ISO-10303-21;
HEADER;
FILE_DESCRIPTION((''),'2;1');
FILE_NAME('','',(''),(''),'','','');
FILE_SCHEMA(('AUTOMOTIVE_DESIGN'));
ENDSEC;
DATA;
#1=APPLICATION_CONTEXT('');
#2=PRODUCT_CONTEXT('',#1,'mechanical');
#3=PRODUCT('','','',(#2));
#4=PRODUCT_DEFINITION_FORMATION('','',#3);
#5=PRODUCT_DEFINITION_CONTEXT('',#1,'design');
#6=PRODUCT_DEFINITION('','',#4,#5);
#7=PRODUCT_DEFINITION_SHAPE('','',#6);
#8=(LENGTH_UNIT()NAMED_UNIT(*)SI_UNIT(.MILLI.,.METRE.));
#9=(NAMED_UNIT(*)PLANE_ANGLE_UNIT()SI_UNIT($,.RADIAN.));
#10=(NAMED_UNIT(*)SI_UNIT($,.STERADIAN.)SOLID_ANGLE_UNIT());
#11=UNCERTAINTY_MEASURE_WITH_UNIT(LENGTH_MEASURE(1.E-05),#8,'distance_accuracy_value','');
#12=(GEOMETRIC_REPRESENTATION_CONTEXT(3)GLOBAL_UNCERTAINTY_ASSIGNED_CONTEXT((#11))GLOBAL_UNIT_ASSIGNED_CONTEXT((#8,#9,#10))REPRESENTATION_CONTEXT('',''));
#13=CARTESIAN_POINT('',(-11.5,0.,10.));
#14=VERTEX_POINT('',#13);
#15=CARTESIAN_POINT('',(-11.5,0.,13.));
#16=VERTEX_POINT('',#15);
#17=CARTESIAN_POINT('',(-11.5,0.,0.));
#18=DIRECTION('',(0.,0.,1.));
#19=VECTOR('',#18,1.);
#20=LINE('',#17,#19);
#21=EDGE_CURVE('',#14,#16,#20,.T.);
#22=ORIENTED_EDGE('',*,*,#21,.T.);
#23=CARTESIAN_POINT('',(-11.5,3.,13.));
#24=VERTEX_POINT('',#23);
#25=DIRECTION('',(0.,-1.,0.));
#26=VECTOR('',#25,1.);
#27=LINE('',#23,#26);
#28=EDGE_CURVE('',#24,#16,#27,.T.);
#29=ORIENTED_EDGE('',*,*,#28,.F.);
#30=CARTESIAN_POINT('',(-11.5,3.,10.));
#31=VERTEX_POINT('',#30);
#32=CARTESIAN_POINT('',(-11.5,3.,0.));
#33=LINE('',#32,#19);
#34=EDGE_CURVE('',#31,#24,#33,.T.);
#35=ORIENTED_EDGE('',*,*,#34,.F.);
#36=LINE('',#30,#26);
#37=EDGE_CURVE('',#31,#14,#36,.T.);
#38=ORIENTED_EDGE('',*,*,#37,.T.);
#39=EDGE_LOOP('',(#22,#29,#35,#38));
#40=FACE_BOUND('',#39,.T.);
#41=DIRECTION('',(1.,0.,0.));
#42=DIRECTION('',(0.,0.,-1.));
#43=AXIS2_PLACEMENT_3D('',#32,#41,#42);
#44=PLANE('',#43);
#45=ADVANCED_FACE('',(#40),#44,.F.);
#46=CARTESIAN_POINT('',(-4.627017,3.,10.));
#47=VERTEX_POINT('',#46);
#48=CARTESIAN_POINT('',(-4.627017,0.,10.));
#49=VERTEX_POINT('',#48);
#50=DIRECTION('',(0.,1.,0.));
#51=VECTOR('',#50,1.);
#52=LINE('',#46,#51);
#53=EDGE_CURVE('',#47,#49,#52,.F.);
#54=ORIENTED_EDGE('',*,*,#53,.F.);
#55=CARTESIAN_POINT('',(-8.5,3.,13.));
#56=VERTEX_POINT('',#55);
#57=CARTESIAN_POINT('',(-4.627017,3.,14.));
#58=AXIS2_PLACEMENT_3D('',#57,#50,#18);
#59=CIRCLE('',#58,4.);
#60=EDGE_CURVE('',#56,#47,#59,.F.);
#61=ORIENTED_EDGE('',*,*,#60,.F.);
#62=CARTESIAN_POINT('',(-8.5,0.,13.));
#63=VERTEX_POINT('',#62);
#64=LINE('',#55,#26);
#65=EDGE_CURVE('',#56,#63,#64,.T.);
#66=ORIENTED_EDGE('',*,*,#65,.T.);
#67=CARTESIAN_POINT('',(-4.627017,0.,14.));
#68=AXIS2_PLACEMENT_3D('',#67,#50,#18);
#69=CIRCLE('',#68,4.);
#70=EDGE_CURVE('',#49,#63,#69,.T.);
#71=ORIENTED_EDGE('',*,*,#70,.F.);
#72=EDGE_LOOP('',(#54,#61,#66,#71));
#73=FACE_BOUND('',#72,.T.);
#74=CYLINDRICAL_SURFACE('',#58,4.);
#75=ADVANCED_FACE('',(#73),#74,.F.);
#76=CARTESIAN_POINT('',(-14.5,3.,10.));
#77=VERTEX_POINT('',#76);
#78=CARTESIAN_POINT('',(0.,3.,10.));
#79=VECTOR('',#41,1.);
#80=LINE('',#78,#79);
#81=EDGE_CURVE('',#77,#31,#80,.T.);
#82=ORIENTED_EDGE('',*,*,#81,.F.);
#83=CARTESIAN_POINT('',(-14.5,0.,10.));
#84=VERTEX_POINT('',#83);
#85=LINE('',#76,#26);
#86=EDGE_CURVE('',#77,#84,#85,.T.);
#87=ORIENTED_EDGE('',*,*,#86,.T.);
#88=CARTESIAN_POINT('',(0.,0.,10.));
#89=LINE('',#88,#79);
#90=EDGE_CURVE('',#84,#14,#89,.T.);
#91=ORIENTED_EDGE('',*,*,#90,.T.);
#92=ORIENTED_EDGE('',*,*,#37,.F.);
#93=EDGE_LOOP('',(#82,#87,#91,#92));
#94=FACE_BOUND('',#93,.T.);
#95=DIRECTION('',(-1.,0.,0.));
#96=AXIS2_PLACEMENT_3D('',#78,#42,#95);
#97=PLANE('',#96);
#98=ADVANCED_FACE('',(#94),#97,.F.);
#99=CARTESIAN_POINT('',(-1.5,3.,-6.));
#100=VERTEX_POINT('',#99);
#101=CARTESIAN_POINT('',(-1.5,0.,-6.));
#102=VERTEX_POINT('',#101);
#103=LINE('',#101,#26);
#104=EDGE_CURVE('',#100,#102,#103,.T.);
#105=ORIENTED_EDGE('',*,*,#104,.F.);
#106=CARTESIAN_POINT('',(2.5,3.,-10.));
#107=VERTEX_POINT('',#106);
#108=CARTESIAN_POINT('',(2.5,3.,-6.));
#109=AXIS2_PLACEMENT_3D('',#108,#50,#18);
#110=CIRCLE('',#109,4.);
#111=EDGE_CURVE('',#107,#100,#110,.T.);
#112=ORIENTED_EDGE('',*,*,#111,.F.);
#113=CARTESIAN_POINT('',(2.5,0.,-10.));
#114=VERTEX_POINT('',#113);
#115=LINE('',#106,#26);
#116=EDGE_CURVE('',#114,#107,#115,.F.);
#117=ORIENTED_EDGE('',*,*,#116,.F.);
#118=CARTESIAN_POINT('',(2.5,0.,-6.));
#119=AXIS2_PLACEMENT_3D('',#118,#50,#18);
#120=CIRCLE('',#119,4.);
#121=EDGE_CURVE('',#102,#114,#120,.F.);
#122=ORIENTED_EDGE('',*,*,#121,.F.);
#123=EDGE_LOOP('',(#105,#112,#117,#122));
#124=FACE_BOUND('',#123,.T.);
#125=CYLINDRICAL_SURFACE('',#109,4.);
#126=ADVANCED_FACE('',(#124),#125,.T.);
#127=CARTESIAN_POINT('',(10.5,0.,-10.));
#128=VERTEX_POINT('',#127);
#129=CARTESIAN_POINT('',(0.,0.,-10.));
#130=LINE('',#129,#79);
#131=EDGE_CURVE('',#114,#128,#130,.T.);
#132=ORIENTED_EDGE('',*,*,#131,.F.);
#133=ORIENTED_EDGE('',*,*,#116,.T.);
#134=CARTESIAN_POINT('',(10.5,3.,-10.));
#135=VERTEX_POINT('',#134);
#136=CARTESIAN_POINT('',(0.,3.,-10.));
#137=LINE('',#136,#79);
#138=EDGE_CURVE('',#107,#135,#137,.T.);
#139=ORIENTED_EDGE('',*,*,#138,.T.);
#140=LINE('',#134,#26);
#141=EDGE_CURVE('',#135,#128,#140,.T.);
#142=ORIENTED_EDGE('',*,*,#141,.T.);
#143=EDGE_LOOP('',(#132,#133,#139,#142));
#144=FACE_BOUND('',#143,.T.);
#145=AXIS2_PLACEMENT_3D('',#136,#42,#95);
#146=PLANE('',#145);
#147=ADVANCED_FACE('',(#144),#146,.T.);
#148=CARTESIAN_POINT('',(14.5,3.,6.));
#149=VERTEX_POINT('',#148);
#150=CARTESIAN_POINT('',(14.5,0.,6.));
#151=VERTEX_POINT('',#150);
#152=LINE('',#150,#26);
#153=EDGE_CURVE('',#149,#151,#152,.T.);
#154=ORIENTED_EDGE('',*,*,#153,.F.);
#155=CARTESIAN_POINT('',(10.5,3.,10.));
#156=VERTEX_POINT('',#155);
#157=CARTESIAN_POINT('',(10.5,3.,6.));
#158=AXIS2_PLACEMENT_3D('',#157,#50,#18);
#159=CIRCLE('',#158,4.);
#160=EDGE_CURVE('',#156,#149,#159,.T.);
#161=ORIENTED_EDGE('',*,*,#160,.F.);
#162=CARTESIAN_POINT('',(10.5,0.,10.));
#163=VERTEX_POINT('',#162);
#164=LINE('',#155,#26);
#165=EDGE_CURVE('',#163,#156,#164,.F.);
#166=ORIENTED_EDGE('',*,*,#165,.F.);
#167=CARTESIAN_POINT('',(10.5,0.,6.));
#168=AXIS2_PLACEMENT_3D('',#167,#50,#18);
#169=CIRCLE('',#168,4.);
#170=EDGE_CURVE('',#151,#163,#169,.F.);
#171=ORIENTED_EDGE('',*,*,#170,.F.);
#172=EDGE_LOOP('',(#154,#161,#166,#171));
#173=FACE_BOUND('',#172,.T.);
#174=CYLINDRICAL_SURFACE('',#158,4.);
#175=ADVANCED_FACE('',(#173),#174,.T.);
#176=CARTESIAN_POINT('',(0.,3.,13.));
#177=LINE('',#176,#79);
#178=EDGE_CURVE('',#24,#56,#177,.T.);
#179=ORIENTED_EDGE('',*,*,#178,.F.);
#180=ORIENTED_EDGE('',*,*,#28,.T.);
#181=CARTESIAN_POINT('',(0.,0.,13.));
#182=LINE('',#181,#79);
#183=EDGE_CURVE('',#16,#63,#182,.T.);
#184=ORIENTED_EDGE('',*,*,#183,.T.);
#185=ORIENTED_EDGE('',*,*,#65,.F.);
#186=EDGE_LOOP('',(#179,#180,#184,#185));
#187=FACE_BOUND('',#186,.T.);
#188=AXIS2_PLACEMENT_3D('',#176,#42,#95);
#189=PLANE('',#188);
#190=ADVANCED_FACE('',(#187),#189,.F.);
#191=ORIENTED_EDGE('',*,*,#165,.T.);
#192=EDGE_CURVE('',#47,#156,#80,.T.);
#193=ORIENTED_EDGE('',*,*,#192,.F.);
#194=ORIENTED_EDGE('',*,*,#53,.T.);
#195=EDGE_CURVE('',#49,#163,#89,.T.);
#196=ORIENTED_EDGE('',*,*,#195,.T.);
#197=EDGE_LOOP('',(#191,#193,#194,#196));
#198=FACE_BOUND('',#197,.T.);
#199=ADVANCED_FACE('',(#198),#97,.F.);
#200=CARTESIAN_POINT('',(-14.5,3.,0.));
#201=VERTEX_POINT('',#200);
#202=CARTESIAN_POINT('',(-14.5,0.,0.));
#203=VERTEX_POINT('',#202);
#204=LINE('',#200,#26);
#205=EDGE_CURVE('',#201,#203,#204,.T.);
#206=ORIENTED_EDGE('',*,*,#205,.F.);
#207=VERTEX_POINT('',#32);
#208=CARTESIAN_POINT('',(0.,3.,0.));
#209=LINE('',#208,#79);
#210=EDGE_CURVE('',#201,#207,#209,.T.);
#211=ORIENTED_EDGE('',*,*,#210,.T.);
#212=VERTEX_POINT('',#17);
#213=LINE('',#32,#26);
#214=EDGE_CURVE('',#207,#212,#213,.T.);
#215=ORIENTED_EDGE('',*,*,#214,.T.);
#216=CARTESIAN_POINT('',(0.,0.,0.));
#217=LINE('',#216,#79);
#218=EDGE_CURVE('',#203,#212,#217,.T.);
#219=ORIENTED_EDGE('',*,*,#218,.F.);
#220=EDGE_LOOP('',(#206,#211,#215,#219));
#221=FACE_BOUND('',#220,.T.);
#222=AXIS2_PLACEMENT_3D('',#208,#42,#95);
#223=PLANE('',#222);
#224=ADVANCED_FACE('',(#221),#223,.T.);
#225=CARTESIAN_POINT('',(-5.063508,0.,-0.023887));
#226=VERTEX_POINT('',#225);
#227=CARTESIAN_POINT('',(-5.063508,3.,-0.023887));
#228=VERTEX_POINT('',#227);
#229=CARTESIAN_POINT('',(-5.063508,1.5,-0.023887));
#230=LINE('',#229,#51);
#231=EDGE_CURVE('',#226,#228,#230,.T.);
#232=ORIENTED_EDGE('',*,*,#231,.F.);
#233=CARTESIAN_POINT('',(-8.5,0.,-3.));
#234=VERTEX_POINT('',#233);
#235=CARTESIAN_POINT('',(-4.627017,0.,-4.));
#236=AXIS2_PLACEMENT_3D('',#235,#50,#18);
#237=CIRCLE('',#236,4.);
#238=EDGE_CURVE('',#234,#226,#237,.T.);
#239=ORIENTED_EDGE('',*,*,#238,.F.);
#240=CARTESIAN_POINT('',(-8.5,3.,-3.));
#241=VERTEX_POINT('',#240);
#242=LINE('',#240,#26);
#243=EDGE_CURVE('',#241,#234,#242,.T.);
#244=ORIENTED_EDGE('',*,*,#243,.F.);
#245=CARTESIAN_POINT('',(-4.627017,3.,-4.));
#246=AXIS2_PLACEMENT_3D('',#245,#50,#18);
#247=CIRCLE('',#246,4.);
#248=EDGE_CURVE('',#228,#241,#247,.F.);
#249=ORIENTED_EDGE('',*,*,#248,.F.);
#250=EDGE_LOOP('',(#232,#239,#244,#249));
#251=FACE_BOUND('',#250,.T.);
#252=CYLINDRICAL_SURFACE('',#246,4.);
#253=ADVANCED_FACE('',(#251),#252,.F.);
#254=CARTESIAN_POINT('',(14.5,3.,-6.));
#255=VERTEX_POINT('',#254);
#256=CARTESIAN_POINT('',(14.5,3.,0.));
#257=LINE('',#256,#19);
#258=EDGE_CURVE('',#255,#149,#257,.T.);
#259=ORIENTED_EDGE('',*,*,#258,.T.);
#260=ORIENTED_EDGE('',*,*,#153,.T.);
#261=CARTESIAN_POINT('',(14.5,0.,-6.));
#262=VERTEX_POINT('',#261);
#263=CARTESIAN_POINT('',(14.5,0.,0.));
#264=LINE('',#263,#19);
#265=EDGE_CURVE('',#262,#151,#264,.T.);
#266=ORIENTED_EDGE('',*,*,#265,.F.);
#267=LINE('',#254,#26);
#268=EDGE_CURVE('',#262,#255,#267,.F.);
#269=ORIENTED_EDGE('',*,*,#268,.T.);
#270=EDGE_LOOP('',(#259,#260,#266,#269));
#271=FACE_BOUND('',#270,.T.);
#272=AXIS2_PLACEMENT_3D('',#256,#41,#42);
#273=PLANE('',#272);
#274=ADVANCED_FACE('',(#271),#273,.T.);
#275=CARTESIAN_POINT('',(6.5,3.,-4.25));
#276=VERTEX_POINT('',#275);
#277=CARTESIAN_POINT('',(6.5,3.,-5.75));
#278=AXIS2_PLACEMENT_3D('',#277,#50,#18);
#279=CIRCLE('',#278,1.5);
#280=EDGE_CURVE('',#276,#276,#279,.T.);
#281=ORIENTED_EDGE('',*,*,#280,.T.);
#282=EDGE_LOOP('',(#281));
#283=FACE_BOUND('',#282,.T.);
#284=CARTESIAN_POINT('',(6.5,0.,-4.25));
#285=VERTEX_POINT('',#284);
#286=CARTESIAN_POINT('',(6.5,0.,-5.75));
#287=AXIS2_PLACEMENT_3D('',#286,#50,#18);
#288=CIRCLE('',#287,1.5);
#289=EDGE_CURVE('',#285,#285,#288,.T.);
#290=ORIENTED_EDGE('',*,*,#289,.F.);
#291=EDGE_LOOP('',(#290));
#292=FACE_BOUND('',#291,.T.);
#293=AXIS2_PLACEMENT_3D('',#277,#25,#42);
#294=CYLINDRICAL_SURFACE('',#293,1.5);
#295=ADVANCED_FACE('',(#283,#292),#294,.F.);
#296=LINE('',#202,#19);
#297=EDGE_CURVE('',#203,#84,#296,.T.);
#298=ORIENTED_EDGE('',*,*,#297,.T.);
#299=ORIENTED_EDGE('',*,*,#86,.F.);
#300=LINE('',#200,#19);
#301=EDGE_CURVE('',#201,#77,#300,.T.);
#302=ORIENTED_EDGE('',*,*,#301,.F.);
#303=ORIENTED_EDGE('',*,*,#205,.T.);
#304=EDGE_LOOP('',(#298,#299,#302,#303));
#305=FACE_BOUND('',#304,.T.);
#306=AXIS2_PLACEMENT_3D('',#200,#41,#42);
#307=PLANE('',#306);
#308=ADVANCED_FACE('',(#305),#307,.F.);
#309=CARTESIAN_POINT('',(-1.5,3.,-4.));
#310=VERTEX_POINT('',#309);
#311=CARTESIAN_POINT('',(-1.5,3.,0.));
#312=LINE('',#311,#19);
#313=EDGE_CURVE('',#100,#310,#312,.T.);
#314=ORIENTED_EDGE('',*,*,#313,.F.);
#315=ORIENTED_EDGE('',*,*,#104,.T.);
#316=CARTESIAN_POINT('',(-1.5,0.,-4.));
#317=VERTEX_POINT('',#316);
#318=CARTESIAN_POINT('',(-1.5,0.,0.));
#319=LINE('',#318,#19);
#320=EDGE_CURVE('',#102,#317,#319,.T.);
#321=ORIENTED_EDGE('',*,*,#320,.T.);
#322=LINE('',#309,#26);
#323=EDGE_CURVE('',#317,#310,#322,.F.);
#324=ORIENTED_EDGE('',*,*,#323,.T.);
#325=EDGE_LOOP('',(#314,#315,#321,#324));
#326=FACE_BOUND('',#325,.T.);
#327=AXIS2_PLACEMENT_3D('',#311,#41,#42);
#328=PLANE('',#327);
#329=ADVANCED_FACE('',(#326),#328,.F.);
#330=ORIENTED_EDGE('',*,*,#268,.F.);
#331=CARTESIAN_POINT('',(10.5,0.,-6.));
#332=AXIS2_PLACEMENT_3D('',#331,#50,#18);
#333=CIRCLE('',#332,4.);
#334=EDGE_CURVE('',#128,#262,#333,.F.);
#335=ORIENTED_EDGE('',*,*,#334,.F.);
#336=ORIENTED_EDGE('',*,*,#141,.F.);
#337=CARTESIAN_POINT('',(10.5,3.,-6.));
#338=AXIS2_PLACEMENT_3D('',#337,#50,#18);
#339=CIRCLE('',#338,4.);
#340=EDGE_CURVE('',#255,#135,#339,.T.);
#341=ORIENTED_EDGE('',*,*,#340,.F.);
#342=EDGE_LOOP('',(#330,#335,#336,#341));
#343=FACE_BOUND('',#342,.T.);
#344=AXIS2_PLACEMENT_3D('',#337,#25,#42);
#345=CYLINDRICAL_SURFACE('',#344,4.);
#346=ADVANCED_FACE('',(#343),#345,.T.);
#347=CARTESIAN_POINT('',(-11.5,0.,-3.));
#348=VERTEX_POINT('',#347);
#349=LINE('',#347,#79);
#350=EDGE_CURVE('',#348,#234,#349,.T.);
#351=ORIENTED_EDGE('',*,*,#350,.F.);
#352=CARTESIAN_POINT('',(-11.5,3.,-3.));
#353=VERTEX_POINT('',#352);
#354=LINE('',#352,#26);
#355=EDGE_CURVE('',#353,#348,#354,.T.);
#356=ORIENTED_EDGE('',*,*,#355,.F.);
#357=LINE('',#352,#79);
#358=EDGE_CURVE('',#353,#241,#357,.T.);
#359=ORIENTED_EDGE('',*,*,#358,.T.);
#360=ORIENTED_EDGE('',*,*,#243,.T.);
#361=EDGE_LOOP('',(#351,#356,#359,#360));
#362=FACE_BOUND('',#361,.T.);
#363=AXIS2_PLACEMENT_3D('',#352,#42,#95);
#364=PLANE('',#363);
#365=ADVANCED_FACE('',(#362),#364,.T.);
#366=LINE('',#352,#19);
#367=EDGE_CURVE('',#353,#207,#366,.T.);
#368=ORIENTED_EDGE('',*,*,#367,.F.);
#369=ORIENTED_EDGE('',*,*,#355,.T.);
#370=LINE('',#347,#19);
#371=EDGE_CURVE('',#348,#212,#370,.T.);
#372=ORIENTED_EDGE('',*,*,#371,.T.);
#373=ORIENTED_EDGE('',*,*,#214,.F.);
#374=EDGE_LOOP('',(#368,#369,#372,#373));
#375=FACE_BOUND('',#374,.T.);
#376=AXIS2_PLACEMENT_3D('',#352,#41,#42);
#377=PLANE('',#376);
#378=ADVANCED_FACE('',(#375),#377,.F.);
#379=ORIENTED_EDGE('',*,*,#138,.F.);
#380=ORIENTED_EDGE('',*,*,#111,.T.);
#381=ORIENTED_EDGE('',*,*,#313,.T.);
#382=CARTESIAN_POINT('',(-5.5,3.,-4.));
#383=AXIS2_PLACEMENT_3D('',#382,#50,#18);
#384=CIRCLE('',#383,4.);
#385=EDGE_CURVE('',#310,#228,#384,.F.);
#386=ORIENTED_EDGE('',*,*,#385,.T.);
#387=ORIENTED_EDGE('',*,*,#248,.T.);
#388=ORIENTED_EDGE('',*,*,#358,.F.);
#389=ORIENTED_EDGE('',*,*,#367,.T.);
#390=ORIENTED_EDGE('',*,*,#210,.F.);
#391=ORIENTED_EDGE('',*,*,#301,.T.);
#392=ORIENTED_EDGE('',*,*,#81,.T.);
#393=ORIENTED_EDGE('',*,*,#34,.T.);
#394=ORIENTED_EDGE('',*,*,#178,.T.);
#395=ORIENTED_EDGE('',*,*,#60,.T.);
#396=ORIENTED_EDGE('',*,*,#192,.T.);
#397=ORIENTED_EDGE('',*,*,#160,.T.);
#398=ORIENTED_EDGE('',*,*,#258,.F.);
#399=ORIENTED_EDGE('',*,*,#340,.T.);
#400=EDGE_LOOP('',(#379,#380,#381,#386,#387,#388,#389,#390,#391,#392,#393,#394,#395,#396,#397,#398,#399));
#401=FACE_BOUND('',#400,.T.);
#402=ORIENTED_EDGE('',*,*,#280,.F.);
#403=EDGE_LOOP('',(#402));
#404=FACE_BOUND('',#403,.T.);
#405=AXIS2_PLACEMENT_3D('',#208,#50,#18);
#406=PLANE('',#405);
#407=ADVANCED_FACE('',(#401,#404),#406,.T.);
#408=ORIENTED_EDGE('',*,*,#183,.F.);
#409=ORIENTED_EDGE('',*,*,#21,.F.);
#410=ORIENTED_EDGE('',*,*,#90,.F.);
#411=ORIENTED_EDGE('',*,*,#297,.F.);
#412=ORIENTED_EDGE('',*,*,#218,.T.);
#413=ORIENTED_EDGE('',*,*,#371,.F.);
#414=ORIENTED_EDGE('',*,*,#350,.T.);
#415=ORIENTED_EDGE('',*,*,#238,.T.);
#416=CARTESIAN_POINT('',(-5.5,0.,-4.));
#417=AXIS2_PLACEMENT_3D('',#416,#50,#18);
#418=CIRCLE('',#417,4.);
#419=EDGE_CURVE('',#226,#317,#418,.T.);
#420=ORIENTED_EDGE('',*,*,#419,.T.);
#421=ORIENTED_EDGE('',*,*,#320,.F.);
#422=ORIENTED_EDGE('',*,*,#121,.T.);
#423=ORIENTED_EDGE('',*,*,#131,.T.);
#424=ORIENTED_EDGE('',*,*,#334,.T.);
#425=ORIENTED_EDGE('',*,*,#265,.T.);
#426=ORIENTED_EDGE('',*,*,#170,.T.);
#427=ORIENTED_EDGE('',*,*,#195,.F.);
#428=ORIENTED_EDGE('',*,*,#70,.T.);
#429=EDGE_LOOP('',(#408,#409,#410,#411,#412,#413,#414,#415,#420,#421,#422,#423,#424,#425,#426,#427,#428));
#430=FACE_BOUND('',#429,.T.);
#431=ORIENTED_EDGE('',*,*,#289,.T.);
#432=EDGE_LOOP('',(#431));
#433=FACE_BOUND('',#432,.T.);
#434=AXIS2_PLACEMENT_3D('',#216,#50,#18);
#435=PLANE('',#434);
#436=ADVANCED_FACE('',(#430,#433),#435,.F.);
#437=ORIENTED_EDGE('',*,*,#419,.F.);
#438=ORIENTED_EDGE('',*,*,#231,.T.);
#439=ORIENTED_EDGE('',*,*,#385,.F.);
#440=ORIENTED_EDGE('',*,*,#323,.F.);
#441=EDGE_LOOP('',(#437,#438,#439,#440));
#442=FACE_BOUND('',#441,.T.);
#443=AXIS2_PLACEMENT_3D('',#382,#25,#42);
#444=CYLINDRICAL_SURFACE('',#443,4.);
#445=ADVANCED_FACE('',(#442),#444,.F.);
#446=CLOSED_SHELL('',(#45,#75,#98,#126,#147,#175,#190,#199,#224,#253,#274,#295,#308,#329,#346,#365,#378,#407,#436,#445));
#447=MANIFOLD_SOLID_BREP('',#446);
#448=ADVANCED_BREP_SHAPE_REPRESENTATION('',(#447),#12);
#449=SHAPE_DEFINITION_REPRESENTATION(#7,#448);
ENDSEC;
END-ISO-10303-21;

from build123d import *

# Parameters (mm, degrees)
SKETCH1_R           = 1.5
SKETCH1_W           = 3
SKETCH1_H           = 3
BOSS_EXTRUDE1_DEPTH = 3
FILLET1_R           = 4


with BuildPart() as part:
    # Sketch1 → Boss-Extrude1 (new body)
    # profile 1 of 3: a face of its own
    with BuildSketch(Plane(origin=(0, 0, 0), x_dir=(1, 0, 0), z_dir=(0, 1, 0))):
        Polygon((14.5, 10), (-1.5, 10), (-1.5, 0), (-8.5, 0), (-11.5, 0), (-14.5, 0), (-14.5, -10), (-11.5, -10), (-8.5, -10), (14.5, -10), align=None)
        with Locations(Location((6.5, 5.75, 0), (0, 0, 270))):
            Circle(SKETCH1_R, mode=Mode.SUBTRACT)
    # profile 2 of 3: a face of its own
    with BuildSketch(Plane(origin=(0, 0, 0), x_dir=(1, 0, 0), z_dir=(0, 1, 0))):
        with Locations((-10, -11.5)):
            Rectangle(SKETCH1_W, SKETCH1_H)
    # profile 3 of 3: a face of its own
    with BuildSketch(Plane(origin=(0, 0, 0), x_dir=(1, 0, 0), z_dir=(0, 1, 0))):
        with Locations((-10, 1.5)):
            Rectangle(SKETCH1_W, SKETCH1_H)
    extrude(amount=BOSS_EXTRUDE1_DEPTH)

    # Fillet1
    # the kernel refuses this fillet: 4 mm, written as the material it adds along each edge
    with BuildSketch(Plane(origin=(-8.5, 0, 0), x_dir=(1, 0, 0), z_dir=(0, 1, 0))) as fillet1_piece_1:
        with BuildLine():
            CenterArc((3.872983346, 4), FILLET1_R, 194.477512186, 75.522487814)
            Line((0, 3), (0, 0))
            Line((0, 0), (3.872983346, 0))
        make_face()
    extrude(amount=3)
    with BuildSketch(Plane(origin=(-8.5, 0, 10), x_dir=(1, 0, 0), z_dir=(0, 1, 0))) as fillet1_piece_2:
        with BuildLine():
            CenterArc((3.872983346, -4), FILLET1_R, 90, 75.522487814)
            Line((0, -3), (0, 0))
            Line((0, 0), (3.872983346, 0))
        make_face()
    extrude(amount=3)
    with BuildSketch(Plane(origin=(-1.5, 0, 0), x_dir=(0, 0, -1), z_dir=(0, 1, 0))) as fillet1_piece_3:
        with BuildLine():
            CenterArc((FILLET1_R, FILLET1_R), FILLET1_R, 180, 90)
            Line((0, FILLET1_R), (0, 0))
            Line((0, 0), (FILLET1_R, 0))
        make_face()
    extrude(amount=3)
    # the kernel refuses this fillet: 4 mm, written as the material it takes off along each edge
    with BuildSketch(Plane(origin=(14.5, -10, 10), x_dir=(0, 0, -1), z_dir=(0, 1, 0)), Plane(origin=(14.5, -10, -10), x_dir=(-1, 0, 0), z_dir=(0, 1, 0))) as fillet1_2_piece_1:
        with BuildLine():
            CenterArc((FILLET1_R, FILLET1_R), FILLET1_R, 180, 90)
            Line((0, FILLET1_R), (0, 0))
            Line((0, 0), (FILLET1_R, 0))
        make_face()
    extrude(amount=23, mode=Mode.SUBTRACT)
    with BuildSketch(Plane(origin=(-1.5, -10, -10), x_dir=(1, 0, 0), z_dir=(0, 1, 0))) as fillet1_2_piece_2:
        with BuildLine():
            CenterArc((FILLET1_R, -FILLET1_R), FILLET1_R, 90, 90)
            Line((0, -FILLET1_R), (0, 0))
            Line((0, 0), (FILLET1_R, 0))
        make_face()
    extrude(amount=23, mode=Mode.SUBTRACT)


solid = part.part
